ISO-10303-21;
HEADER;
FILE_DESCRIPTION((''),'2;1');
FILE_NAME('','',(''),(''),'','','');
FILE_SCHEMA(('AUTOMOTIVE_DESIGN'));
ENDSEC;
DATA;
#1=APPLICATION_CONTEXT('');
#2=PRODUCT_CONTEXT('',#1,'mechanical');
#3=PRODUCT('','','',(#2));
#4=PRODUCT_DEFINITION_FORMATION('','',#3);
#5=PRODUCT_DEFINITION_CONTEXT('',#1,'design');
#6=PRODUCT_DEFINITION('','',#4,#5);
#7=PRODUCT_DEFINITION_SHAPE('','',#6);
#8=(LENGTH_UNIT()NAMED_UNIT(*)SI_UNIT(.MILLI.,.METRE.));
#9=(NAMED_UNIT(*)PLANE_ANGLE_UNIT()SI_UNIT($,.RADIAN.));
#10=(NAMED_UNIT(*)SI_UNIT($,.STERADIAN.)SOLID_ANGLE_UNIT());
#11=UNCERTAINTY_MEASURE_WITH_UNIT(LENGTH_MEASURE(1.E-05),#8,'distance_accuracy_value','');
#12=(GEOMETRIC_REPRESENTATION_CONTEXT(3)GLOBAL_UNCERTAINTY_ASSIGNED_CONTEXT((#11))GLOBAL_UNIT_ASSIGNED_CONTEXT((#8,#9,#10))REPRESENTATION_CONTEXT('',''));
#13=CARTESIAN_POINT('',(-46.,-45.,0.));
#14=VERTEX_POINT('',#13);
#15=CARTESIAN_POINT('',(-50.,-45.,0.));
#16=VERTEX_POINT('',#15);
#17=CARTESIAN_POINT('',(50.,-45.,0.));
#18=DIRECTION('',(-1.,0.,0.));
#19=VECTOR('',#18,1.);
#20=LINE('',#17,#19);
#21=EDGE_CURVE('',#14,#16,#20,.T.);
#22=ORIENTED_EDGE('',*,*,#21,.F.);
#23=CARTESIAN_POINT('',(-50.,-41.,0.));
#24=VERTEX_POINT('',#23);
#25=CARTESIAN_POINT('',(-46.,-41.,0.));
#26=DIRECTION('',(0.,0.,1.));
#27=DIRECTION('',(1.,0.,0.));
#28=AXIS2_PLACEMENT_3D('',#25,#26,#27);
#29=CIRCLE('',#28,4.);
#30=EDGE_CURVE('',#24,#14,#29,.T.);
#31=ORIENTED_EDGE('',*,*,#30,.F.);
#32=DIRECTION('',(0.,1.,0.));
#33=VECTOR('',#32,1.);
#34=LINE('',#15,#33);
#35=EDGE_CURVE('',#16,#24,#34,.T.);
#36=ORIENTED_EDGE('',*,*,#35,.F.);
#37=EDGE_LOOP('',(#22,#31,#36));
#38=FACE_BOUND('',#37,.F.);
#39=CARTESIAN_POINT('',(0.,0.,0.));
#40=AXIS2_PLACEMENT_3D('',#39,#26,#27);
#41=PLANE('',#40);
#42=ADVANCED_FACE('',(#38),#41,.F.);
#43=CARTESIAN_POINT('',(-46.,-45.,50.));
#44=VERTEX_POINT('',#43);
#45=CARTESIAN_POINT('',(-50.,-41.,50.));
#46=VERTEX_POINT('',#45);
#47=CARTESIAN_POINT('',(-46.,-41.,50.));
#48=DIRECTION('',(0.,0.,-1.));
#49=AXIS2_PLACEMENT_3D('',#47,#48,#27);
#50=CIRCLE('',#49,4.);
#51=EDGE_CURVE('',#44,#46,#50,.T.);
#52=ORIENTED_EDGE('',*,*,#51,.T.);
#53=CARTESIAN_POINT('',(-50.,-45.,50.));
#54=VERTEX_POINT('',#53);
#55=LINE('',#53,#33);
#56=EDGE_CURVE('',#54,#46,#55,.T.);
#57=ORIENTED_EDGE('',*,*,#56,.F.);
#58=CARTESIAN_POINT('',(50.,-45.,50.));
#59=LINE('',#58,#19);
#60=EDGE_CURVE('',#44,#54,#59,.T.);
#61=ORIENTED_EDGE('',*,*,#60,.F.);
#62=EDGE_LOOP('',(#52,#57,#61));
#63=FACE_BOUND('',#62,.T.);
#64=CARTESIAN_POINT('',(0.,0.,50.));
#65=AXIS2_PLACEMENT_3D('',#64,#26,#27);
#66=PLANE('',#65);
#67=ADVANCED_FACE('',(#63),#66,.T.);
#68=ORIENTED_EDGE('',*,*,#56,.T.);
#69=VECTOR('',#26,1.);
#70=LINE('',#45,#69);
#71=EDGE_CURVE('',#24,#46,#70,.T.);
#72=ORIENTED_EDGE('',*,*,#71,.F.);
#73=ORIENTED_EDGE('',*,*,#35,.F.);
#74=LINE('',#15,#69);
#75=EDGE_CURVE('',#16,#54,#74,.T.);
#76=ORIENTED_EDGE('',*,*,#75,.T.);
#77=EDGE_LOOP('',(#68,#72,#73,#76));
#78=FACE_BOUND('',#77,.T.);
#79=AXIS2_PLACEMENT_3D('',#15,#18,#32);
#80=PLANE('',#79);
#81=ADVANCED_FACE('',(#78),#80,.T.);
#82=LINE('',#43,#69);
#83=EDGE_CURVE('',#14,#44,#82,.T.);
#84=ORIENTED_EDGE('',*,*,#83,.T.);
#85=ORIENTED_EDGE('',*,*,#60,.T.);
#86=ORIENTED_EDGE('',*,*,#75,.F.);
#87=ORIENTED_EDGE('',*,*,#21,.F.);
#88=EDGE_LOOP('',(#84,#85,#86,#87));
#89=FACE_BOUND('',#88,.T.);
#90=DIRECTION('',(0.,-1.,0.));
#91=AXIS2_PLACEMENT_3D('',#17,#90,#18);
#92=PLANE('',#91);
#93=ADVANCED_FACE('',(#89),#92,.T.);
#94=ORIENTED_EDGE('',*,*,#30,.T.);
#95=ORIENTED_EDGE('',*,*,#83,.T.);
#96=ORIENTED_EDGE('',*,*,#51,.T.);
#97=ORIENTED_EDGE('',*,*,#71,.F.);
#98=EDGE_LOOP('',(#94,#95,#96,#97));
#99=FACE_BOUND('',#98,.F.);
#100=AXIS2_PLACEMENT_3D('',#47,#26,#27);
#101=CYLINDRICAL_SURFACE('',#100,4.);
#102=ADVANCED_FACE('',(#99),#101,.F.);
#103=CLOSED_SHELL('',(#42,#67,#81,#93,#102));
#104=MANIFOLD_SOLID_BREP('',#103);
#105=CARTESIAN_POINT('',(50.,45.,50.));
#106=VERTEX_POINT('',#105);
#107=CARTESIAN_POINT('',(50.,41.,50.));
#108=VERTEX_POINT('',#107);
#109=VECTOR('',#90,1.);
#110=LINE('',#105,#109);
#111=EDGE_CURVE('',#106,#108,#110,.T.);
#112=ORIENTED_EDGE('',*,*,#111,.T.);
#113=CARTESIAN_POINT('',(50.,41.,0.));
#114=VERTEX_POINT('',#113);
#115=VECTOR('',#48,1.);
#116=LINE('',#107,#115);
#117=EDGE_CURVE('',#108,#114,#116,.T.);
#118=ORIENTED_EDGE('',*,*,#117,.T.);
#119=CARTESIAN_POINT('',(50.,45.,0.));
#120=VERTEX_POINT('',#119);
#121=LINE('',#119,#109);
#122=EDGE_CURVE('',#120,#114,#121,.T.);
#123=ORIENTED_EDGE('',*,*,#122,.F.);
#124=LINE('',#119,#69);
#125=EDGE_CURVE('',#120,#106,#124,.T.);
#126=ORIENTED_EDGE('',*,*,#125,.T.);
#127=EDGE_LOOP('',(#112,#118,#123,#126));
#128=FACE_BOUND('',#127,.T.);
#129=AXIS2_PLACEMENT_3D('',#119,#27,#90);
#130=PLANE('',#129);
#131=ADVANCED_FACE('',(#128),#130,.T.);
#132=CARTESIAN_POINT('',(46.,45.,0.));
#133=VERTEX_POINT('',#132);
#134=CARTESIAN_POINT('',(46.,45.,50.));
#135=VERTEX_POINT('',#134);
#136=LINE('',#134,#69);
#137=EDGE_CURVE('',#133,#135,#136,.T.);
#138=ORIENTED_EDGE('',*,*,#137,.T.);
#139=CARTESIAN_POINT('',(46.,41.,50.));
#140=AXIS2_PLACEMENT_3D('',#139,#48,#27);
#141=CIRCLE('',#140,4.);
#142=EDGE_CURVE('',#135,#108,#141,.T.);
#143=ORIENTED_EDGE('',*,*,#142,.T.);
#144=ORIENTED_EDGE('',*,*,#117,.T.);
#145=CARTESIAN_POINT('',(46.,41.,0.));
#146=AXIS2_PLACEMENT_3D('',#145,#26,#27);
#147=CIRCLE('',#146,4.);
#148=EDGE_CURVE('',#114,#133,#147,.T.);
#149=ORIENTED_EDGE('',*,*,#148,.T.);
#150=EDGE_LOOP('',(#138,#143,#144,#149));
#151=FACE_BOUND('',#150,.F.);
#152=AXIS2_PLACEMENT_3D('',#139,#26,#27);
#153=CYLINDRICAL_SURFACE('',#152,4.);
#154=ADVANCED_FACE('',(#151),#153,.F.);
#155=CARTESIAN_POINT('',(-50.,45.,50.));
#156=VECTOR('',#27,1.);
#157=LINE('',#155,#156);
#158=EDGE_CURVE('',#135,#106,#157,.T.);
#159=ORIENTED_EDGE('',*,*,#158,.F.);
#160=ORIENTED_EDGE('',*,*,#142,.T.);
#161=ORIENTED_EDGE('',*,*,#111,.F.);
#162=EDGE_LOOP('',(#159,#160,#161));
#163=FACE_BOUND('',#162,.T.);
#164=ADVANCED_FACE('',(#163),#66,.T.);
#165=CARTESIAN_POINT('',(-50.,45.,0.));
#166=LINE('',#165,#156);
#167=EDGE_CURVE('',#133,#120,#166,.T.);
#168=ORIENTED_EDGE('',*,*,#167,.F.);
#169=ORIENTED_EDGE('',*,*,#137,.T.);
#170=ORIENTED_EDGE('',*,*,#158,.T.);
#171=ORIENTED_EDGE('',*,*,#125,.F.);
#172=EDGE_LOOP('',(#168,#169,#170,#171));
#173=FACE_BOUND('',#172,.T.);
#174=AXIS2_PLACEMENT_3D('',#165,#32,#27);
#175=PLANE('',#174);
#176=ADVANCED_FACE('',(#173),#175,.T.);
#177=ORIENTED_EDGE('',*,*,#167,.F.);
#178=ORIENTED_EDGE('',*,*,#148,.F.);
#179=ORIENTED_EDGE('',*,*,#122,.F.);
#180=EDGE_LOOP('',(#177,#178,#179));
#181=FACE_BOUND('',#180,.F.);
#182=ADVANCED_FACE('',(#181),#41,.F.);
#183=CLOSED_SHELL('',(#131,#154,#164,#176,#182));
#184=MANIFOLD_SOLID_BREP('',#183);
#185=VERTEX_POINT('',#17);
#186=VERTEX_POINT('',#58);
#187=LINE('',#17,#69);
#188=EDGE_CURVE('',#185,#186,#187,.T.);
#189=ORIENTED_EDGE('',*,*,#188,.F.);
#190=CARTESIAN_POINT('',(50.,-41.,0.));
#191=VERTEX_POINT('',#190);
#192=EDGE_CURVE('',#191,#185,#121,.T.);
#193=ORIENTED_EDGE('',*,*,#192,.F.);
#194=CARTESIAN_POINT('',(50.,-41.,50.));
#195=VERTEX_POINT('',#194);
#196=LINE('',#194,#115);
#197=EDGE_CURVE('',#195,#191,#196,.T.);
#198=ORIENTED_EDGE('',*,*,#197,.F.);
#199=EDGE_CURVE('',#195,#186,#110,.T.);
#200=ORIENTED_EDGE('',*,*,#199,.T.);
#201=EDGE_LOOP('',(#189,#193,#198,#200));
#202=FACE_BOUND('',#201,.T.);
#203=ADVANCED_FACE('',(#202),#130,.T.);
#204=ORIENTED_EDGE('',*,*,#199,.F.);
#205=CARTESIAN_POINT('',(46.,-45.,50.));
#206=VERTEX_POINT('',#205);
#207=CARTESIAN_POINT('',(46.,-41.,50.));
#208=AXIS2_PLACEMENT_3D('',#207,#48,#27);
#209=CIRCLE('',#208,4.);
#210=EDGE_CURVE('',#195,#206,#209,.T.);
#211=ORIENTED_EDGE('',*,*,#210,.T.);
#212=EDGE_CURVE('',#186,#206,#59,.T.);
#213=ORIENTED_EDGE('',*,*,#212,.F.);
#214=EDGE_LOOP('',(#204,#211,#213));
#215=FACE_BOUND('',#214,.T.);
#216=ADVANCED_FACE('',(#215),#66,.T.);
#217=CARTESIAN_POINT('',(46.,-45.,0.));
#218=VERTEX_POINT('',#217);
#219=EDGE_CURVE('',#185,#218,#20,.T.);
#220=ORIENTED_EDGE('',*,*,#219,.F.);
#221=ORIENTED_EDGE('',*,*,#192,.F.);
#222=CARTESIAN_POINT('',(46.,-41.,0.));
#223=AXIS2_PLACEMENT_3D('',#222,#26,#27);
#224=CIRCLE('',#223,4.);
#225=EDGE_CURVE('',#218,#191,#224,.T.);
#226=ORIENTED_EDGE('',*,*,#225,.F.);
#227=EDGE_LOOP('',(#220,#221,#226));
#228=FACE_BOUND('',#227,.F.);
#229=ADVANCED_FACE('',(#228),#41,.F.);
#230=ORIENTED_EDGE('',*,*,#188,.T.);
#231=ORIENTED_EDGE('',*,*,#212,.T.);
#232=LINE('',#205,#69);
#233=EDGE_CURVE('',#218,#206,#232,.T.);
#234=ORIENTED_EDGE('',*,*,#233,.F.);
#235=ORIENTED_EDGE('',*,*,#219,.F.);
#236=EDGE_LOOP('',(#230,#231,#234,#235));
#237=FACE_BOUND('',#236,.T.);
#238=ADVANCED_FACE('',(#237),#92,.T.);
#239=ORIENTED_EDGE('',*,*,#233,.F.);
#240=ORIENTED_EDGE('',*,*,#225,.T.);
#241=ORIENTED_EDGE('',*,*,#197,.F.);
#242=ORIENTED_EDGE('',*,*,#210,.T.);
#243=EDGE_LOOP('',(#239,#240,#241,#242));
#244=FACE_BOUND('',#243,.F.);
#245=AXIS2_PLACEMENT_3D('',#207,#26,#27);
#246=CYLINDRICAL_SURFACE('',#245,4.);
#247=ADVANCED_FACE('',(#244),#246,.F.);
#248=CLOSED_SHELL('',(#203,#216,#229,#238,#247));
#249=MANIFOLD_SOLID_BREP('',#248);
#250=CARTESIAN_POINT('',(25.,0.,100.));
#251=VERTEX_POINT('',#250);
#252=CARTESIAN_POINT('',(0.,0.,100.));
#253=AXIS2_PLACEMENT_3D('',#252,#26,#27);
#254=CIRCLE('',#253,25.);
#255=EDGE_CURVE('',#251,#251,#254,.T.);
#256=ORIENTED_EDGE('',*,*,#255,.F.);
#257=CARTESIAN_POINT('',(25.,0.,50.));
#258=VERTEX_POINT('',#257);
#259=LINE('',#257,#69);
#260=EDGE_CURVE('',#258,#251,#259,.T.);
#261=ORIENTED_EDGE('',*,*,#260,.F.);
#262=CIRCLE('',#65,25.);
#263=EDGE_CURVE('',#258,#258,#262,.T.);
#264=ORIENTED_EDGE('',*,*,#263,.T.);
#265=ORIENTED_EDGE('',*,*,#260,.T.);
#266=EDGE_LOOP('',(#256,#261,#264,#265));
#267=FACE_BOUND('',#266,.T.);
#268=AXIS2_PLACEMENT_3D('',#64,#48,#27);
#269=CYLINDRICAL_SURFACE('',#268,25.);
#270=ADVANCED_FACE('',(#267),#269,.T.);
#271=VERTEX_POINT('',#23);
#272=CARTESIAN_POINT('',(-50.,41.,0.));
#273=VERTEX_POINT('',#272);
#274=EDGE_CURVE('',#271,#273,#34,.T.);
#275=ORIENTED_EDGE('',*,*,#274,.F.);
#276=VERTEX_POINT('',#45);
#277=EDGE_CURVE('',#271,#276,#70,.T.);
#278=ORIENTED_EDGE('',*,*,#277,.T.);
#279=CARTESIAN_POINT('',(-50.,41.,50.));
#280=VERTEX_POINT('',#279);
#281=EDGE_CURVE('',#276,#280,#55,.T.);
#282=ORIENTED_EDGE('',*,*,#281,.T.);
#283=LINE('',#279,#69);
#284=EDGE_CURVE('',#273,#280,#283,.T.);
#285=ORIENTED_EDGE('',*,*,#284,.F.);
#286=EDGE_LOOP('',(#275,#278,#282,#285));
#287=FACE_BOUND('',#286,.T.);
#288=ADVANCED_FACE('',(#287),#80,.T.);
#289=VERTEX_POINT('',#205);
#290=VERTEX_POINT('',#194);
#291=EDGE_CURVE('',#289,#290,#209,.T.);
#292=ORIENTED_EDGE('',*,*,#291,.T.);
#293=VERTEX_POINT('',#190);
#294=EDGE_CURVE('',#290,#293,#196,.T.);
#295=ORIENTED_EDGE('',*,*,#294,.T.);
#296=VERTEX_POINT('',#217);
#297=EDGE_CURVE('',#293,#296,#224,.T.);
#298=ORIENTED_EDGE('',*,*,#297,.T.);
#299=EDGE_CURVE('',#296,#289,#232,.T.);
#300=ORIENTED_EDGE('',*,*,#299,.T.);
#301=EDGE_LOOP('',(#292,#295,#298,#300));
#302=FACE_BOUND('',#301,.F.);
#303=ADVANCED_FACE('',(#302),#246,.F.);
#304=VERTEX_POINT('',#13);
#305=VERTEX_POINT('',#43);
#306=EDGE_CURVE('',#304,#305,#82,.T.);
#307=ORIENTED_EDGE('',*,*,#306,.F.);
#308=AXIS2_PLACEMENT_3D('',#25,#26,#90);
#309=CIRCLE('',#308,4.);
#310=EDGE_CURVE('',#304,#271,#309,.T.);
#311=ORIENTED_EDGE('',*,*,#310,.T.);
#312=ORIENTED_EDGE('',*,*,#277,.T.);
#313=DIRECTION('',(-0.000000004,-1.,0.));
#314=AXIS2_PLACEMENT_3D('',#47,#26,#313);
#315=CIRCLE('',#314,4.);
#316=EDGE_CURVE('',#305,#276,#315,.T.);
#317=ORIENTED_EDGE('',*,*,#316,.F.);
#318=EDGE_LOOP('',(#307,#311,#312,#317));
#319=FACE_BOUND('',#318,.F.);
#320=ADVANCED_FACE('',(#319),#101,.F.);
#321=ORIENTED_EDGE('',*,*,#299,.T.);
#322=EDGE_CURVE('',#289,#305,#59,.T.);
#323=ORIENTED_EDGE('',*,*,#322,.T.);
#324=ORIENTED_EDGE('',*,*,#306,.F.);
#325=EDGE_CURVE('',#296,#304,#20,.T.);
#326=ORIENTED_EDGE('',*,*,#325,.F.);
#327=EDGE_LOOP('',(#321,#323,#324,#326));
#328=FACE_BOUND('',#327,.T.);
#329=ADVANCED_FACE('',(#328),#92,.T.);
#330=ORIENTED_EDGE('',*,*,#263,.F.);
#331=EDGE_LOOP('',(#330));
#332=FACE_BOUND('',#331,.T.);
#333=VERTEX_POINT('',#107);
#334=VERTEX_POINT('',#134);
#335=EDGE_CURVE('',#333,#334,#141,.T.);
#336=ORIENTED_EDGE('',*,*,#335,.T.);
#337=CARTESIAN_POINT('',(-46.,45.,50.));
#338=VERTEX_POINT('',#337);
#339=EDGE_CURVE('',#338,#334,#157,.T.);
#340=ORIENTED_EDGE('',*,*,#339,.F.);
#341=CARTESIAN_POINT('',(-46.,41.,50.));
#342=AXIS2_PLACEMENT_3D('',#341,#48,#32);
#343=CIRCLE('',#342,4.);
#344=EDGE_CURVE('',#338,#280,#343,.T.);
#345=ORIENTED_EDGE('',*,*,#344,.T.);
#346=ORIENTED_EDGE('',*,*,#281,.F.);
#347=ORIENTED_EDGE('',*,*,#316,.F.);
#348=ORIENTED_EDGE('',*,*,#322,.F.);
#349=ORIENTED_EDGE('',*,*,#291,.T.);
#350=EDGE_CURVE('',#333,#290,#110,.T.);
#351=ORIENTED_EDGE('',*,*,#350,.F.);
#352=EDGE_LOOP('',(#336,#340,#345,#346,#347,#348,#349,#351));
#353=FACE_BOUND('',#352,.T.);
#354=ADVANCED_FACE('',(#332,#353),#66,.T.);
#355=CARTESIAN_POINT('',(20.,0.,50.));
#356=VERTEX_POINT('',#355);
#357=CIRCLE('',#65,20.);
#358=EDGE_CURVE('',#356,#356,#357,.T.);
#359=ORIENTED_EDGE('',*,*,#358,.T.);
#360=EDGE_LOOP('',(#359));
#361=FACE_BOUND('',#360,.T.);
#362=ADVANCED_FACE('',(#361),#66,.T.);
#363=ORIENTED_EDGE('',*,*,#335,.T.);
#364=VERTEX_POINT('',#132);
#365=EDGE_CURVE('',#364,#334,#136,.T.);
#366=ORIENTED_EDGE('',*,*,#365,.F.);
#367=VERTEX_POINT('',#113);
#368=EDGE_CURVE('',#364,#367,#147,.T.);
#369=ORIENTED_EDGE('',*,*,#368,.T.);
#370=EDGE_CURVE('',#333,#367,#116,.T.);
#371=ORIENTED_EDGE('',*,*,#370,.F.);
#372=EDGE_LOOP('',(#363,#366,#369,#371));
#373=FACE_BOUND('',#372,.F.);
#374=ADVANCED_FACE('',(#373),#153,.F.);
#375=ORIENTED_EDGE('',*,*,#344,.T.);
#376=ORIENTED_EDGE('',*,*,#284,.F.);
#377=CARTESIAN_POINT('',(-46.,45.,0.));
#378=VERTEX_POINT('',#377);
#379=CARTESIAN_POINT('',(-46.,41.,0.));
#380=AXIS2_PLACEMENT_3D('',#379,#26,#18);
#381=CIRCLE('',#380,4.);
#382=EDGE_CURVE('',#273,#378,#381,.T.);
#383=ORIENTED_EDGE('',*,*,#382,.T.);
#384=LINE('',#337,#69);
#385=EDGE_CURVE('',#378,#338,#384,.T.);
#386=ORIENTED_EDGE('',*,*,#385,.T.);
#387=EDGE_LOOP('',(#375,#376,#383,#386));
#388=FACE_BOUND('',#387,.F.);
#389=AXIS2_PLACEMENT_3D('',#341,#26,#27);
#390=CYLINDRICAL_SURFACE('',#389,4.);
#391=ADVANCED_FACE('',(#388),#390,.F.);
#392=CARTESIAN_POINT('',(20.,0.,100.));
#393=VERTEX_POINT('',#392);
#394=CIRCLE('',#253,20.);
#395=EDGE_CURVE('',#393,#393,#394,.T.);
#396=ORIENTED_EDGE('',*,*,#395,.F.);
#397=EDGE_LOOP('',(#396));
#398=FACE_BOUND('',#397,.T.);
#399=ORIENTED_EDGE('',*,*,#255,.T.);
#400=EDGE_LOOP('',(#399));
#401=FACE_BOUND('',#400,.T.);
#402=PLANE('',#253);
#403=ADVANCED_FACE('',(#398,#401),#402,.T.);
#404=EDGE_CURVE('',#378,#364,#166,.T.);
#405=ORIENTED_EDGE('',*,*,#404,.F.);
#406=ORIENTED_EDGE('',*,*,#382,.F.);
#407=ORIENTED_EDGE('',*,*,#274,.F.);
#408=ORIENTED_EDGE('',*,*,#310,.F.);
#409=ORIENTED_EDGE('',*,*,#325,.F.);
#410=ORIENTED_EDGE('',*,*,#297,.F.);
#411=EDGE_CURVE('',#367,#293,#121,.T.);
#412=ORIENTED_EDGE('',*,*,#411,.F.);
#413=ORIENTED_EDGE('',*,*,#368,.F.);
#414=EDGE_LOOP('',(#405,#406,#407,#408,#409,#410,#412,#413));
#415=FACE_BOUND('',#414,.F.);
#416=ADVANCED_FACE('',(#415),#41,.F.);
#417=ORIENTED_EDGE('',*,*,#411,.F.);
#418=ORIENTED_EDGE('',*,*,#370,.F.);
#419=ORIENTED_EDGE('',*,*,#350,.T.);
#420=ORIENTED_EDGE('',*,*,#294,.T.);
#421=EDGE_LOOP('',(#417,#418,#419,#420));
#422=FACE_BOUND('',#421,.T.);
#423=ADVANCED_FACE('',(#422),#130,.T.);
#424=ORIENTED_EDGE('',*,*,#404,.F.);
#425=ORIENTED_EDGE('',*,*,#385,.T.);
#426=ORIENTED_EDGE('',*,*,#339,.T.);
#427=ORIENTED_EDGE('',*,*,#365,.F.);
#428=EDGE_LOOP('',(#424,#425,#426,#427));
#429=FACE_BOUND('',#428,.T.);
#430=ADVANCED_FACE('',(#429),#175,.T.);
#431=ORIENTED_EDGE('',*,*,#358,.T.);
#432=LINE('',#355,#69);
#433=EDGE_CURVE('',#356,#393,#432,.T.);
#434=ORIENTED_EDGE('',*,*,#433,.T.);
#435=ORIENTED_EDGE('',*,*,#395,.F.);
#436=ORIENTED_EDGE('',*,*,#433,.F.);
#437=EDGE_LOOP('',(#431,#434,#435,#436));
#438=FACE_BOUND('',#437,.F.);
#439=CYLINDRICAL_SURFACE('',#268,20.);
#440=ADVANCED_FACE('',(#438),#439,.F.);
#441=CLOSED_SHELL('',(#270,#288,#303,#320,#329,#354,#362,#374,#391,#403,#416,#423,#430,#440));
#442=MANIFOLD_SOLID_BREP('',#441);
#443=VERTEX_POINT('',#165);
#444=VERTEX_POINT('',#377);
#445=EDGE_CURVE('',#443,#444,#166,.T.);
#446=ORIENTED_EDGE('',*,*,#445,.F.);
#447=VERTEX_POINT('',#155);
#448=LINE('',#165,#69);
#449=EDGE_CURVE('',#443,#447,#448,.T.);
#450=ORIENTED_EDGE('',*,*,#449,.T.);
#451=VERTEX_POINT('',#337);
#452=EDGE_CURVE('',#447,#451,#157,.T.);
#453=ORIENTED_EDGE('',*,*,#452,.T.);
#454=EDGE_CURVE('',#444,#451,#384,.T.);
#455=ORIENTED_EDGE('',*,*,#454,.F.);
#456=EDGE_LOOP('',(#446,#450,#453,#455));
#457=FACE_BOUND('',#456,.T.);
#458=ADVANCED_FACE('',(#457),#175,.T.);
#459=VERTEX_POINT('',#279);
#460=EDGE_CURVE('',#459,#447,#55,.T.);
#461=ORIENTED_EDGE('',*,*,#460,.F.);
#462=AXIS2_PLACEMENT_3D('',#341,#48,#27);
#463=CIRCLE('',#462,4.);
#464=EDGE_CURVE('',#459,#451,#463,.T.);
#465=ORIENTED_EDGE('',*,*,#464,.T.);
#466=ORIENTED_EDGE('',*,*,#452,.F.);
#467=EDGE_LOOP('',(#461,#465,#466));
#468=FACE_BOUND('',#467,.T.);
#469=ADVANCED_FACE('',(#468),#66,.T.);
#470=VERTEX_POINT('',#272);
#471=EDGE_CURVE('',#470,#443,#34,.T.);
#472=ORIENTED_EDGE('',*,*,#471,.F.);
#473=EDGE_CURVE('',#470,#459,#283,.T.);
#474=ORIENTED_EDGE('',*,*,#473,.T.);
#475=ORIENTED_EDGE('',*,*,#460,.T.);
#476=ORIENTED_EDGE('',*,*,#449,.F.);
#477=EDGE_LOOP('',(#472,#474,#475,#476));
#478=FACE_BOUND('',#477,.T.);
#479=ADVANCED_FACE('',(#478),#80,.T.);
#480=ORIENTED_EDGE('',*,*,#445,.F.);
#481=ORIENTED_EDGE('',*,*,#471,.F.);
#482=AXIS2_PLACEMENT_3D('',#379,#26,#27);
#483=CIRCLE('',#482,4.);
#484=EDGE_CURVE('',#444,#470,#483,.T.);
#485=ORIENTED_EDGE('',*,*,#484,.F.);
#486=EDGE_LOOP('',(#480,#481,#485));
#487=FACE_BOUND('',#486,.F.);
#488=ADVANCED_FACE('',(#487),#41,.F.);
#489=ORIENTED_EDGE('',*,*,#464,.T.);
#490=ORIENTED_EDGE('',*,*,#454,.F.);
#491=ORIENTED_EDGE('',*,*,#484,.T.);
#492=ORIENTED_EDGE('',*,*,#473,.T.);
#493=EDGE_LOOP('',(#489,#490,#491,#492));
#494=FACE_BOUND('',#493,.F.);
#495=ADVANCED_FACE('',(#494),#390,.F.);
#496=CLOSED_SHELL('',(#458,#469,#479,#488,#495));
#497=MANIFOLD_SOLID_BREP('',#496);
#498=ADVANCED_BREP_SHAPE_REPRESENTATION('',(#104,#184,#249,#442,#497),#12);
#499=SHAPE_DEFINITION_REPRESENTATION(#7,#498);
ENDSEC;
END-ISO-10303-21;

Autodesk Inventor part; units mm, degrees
ref_plane "YZ Plane" through (0, 0, 0) normal (1, 0, 0) x (0, 1, 0)
ref_plane "XZ Plane" through (0, 0, 0) normal (0, 1, 0) x (-1, 0, 0)
ref_plane "XY Plane" through (0, 0, 0) normal (0, 0, 1) x (1, 0, 0)
sketch "Sketch1" plane through (0, 0, 0) normal (0, 0, 1) x (1, 0, 0)
  line L0 (50, -45) -> (-50, -45)
  line L1 (-50, -45) -> (-50, 45)
  line L2 (-50, 45) -> (50, 45)
  line L3 (50, 45) -> (50, -45)
  line L4 (50, -45) -> (-50, 45) construction
  line L5 (-50, -45) -> (50, 45) construction
  point P0 (0, 0)
  dimension "d0" = 100
  dimension "d1" = 90
extrude "Extrusion1" add sketch "Sketch1" along normal blind 50
sketch "Sketch2" plane through (0, 0, 50) normal (0, 0, 1) x (1, 0, 0)
  line L0 (50, -45) -> (50, 45) projected
  line L1 (50, 45) -> (-50, 45) projected
  circle A0 centre (46, 41) radius 4
  circle A1 centre (-46, 41) radius 4
  line L2 (-50, 45) -> (-50, -45) projected
  circle A2 centre (-46, -41) radius 4
  line L3 (-50, -45) -> (50, -45) projected
  circle A3 centre (46, -41) radius 4
  point P0 (0, 0)
extrude "Extrusion2" cut sketch "Sketch2" against normal through all contours A3 | A0 | A2 | A1
sketch "Sketch3" plane through (0, 0, 50) normal (0, 0, 1) x (1, 0, 0)
  circle A0 centre (0, 0) radius 25
  circle A1 centre (0, 0) radius 20
extrude "Extrusion3" add sketch "Sketch3" along normal blind 50
thread "Thread1" size "M50x4" class "6H" standard "ANSI Metric M Profile" length 30
properties part number "Práctica1"
